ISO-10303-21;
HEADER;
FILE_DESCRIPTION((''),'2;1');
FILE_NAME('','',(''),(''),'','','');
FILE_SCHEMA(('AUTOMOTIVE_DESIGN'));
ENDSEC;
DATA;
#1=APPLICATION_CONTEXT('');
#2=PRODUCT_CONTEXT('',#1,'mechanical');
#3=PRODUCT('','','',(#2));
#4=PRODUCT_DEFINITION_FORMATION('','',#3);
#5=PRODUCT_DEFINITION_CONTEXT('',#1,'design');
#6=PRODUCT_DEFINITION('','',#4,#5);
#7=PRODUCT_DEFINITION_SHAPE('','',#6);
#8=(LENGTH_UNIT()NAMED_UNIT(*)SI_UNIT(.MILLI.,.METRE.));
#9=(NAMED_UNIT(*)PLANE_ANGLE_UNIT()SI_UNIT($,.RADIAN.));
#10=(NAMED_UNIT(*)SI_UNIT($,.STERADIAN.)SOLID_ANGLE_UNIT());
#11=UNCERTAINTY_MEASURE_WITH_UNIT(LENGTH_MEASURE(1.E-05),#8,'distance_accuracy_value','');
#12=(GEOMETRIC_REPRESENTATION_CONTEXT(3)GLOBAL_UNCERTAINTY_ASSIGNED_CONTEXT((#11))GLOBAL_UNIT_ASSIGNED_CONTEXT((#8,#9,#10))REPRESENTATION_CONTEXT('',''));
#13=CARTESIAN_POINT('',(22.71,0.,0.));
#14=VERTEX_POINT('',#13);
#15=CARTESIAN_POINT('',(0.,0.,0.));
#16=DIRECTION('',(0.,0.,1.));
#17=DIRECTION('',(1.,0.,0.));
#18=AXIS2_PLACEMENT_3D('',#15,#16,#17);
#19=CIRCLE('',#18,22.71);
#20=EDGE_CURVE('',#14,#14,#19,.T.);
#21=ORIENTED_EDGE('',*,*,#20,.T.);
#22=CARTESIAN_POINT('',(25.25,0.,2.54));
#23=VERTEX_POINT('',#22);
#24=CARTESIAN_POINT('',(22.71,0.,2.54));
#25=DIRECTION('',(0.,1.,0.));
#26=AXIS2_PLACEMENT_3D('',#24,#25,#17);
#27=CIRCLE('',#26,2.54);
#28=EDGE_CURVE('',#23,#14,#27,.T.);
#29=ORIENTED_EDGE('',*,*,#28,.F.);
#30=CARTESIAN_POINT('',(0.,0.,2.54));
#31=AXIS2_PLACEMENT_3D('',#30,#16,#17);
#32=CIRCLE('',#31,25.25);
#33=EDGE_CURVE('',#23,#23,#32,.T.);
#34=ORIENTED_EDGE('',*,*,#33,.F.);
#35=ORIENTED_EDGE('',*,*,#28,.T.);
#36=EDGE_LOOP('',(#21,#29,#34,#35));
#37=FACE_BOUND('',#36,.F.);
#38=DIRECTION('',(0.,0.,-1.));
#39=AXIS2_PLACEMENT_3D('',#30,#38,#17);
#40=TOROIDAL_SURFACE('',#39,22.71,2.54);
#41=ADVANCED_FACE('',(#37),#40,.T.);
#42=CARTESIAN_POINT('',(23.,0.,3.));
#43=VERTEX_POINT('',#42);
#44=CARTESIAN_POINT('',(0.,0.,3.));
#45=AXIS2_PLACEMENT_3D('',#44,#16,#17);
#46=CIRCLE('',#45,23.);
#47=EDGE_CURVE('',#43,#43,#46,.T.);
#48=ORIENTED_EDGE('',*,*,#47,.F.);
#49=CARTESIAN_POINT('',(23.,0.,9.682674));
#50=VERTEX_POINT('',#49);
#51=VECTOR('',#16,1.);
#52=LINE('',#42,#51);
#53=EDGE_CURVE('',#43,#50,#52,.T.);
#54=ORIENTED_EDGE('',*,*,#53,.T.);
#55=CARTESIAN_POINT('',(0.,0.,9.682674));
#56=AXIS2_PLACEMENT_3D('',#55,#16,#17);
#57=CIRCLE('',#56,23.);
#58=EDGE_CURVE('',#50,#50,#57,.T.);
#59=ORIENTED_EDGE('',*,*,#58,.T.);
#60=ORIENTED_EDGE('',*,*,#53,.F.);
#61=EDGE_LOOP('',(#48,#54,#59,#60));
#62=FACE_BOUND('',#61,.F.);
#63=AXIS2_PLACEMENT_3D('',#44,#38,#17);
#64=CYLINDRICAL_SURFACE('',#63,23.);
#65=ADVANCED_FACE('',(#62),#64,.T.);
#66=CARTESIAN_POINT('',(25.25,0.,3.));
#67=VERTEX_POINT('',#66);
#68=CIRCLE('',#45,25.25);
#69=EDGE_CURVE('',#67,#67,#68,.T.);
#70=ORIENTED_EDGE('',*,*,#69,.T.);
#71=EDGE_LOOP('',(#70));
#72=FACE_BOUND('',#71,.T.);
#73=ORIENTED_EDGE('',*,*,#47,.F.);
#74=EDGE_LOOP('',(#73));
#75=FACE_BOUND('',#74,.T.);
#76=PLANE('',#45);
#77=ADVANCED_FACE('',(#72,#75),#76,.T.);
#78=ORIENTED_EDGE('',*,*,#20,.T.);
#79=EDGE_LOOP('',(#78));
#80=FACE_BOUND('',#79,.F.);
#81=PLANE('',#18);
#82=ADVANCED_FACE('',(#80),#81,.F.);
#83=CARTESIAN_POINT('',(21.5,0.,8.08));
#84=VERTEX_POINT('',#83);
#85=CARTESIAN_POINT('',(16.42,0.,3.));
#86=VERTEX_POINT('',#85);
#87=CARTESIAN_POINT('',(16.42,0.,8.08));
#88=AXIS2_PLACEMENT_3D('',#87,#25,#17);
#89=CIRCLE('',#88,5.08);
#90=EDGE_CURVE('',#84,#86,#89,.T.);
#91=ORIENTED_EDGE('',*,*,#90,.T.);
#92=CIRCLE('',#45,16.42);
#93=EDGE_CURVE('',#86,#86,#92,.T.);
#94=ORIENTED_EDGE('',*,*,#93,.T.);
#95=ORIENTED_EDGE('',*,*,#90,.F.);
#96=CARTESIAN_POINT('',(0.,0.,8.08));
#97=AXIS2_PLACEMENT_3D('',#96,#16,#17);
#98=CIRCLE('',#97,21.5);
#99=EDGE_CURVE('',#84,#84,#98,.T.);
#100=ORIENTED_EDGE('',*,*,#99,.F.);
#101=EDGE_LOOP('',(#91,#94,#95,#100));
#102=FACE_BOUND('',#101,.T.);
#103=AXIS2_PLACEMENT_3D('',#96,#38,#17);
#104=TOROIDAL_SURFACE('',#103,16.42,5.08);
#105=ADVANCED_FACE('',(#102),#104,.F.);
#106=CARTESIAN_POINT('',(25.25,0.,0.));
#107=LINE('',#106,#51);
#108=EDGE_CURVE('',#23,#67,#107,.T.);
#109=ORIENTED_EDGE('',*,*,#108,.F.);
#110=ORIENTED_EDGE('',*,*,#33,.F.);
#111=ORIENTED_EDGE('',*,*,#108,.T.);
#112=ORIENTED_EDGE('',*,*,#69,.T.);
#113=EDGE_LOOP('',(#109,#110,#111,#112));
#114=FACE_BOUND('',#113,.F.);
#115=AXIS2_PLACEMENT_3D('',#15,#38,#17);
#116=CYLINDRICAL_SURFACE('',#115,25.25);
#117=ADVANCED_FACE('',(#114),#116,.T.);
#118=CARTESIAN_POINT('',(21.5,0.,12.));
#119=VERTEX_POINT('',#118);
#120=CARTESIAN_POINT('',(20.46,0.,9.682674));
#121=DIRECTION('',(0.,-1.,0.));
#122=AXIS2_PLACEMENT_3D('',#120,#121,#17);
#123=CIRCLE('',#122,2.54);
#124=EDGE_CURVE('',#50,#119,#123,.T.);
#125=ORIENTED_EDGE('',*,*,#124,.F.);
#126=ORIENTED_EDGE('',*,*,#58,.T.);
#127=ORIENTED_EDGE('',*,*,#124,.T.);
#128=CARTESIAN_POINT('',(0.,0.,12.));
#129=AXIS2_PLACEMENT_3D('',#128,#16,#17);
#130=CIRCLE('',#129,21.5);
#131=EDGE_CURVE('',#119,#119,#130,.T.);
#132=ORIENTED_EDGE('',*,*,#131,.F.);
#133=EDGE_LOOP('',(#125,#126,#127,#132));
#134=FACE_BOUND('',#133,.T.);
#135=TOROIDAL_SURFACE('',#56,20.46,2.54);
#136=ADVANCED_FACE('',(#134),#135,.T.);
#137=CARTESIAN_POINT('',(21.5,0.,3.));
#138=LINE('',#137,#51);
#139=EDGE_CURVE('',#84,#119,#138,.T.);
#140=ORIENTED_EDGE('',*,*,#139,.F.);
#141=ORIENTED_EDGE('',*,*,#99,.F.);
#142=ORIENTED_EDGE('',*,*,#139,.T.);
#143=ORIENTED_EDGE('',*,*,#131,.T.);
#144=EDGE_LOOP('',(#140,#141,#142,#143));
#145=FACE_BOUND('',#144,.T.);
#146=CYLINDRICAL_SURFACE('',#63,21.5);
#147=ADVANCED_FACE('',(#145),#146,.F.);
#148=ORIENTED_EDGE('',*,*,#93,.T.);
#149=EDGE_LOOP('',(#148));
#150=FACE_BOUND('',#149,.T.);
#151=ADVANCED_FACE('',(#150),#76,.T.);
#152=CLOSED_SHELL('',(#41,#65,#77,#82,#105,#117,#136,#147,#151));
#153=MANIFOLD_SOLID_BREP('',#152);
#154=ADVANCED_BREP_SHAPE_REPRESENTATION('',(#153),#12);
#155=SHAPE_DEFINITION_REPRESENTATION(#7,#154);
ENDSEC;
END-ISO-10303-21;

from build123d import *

# Parameters (mm, degrees)
F0_R     = 25.25
F1_DEPTH = 3
F2_R     = 23
F2_R_2   = 21.5
F3_DEPTH = 9
F4_R     = 2.54
F6_R     = 5.08


# Not quite as in the source:
# - a fillet or chamfer that OpenCascade refuses, or shapes differently, is made with other operations: its cross-section is extruded or revolved along the edge and cut away or added


with BuildPart() as f1:
    # F0 (on Top) → F1 (new body)
    with BuildSketch(Plane.XY):
        Circle(F0_R)
    extrude(amount=F1_DEPTH)

    # F2 (on face) → F3 (join)
    with BuildSketch(Plane.XY.offset(3)):
        Circle(F2_R)
        Circle(F2_R_2, mode=Mode.SUBTRACT)
    extrude(amount=F3_DEPTH)

    # F4
    f4_edges = [f1.edges().sort_by_distance(p)[0] for p in [
        (-25.25, 0, 0),
    ]]
    fillet(f4_edges, radius=F4_R)

    # F5: fillet of radius 2.54 on 1 edges, made by hand

    # F5_s1 → F5_t2 (revolve, cut)
    with BuildSketch(Plane.XZ):
        with BuildLine():
            ThreePointArc((23, 9.6826739547), (22.5922757795, 11.0628913289), (21.5, 12))
            Line((21.5, 12), (23, 12))
            Line((23, 12), (23, 9.6826739547))
        make_face()
    revolve(axis=Axis((0, 0, 12), (0, 0, 1)), mode=Mode.SUBTRACT)

    # F6
    f6_edges = [f1.edges().sort_by_distance(p)[0] for p in [
        (-21.5, 0, 3),
    ]]
    fillet(f6_edges, radius=F6_R)


solid = f1.part
